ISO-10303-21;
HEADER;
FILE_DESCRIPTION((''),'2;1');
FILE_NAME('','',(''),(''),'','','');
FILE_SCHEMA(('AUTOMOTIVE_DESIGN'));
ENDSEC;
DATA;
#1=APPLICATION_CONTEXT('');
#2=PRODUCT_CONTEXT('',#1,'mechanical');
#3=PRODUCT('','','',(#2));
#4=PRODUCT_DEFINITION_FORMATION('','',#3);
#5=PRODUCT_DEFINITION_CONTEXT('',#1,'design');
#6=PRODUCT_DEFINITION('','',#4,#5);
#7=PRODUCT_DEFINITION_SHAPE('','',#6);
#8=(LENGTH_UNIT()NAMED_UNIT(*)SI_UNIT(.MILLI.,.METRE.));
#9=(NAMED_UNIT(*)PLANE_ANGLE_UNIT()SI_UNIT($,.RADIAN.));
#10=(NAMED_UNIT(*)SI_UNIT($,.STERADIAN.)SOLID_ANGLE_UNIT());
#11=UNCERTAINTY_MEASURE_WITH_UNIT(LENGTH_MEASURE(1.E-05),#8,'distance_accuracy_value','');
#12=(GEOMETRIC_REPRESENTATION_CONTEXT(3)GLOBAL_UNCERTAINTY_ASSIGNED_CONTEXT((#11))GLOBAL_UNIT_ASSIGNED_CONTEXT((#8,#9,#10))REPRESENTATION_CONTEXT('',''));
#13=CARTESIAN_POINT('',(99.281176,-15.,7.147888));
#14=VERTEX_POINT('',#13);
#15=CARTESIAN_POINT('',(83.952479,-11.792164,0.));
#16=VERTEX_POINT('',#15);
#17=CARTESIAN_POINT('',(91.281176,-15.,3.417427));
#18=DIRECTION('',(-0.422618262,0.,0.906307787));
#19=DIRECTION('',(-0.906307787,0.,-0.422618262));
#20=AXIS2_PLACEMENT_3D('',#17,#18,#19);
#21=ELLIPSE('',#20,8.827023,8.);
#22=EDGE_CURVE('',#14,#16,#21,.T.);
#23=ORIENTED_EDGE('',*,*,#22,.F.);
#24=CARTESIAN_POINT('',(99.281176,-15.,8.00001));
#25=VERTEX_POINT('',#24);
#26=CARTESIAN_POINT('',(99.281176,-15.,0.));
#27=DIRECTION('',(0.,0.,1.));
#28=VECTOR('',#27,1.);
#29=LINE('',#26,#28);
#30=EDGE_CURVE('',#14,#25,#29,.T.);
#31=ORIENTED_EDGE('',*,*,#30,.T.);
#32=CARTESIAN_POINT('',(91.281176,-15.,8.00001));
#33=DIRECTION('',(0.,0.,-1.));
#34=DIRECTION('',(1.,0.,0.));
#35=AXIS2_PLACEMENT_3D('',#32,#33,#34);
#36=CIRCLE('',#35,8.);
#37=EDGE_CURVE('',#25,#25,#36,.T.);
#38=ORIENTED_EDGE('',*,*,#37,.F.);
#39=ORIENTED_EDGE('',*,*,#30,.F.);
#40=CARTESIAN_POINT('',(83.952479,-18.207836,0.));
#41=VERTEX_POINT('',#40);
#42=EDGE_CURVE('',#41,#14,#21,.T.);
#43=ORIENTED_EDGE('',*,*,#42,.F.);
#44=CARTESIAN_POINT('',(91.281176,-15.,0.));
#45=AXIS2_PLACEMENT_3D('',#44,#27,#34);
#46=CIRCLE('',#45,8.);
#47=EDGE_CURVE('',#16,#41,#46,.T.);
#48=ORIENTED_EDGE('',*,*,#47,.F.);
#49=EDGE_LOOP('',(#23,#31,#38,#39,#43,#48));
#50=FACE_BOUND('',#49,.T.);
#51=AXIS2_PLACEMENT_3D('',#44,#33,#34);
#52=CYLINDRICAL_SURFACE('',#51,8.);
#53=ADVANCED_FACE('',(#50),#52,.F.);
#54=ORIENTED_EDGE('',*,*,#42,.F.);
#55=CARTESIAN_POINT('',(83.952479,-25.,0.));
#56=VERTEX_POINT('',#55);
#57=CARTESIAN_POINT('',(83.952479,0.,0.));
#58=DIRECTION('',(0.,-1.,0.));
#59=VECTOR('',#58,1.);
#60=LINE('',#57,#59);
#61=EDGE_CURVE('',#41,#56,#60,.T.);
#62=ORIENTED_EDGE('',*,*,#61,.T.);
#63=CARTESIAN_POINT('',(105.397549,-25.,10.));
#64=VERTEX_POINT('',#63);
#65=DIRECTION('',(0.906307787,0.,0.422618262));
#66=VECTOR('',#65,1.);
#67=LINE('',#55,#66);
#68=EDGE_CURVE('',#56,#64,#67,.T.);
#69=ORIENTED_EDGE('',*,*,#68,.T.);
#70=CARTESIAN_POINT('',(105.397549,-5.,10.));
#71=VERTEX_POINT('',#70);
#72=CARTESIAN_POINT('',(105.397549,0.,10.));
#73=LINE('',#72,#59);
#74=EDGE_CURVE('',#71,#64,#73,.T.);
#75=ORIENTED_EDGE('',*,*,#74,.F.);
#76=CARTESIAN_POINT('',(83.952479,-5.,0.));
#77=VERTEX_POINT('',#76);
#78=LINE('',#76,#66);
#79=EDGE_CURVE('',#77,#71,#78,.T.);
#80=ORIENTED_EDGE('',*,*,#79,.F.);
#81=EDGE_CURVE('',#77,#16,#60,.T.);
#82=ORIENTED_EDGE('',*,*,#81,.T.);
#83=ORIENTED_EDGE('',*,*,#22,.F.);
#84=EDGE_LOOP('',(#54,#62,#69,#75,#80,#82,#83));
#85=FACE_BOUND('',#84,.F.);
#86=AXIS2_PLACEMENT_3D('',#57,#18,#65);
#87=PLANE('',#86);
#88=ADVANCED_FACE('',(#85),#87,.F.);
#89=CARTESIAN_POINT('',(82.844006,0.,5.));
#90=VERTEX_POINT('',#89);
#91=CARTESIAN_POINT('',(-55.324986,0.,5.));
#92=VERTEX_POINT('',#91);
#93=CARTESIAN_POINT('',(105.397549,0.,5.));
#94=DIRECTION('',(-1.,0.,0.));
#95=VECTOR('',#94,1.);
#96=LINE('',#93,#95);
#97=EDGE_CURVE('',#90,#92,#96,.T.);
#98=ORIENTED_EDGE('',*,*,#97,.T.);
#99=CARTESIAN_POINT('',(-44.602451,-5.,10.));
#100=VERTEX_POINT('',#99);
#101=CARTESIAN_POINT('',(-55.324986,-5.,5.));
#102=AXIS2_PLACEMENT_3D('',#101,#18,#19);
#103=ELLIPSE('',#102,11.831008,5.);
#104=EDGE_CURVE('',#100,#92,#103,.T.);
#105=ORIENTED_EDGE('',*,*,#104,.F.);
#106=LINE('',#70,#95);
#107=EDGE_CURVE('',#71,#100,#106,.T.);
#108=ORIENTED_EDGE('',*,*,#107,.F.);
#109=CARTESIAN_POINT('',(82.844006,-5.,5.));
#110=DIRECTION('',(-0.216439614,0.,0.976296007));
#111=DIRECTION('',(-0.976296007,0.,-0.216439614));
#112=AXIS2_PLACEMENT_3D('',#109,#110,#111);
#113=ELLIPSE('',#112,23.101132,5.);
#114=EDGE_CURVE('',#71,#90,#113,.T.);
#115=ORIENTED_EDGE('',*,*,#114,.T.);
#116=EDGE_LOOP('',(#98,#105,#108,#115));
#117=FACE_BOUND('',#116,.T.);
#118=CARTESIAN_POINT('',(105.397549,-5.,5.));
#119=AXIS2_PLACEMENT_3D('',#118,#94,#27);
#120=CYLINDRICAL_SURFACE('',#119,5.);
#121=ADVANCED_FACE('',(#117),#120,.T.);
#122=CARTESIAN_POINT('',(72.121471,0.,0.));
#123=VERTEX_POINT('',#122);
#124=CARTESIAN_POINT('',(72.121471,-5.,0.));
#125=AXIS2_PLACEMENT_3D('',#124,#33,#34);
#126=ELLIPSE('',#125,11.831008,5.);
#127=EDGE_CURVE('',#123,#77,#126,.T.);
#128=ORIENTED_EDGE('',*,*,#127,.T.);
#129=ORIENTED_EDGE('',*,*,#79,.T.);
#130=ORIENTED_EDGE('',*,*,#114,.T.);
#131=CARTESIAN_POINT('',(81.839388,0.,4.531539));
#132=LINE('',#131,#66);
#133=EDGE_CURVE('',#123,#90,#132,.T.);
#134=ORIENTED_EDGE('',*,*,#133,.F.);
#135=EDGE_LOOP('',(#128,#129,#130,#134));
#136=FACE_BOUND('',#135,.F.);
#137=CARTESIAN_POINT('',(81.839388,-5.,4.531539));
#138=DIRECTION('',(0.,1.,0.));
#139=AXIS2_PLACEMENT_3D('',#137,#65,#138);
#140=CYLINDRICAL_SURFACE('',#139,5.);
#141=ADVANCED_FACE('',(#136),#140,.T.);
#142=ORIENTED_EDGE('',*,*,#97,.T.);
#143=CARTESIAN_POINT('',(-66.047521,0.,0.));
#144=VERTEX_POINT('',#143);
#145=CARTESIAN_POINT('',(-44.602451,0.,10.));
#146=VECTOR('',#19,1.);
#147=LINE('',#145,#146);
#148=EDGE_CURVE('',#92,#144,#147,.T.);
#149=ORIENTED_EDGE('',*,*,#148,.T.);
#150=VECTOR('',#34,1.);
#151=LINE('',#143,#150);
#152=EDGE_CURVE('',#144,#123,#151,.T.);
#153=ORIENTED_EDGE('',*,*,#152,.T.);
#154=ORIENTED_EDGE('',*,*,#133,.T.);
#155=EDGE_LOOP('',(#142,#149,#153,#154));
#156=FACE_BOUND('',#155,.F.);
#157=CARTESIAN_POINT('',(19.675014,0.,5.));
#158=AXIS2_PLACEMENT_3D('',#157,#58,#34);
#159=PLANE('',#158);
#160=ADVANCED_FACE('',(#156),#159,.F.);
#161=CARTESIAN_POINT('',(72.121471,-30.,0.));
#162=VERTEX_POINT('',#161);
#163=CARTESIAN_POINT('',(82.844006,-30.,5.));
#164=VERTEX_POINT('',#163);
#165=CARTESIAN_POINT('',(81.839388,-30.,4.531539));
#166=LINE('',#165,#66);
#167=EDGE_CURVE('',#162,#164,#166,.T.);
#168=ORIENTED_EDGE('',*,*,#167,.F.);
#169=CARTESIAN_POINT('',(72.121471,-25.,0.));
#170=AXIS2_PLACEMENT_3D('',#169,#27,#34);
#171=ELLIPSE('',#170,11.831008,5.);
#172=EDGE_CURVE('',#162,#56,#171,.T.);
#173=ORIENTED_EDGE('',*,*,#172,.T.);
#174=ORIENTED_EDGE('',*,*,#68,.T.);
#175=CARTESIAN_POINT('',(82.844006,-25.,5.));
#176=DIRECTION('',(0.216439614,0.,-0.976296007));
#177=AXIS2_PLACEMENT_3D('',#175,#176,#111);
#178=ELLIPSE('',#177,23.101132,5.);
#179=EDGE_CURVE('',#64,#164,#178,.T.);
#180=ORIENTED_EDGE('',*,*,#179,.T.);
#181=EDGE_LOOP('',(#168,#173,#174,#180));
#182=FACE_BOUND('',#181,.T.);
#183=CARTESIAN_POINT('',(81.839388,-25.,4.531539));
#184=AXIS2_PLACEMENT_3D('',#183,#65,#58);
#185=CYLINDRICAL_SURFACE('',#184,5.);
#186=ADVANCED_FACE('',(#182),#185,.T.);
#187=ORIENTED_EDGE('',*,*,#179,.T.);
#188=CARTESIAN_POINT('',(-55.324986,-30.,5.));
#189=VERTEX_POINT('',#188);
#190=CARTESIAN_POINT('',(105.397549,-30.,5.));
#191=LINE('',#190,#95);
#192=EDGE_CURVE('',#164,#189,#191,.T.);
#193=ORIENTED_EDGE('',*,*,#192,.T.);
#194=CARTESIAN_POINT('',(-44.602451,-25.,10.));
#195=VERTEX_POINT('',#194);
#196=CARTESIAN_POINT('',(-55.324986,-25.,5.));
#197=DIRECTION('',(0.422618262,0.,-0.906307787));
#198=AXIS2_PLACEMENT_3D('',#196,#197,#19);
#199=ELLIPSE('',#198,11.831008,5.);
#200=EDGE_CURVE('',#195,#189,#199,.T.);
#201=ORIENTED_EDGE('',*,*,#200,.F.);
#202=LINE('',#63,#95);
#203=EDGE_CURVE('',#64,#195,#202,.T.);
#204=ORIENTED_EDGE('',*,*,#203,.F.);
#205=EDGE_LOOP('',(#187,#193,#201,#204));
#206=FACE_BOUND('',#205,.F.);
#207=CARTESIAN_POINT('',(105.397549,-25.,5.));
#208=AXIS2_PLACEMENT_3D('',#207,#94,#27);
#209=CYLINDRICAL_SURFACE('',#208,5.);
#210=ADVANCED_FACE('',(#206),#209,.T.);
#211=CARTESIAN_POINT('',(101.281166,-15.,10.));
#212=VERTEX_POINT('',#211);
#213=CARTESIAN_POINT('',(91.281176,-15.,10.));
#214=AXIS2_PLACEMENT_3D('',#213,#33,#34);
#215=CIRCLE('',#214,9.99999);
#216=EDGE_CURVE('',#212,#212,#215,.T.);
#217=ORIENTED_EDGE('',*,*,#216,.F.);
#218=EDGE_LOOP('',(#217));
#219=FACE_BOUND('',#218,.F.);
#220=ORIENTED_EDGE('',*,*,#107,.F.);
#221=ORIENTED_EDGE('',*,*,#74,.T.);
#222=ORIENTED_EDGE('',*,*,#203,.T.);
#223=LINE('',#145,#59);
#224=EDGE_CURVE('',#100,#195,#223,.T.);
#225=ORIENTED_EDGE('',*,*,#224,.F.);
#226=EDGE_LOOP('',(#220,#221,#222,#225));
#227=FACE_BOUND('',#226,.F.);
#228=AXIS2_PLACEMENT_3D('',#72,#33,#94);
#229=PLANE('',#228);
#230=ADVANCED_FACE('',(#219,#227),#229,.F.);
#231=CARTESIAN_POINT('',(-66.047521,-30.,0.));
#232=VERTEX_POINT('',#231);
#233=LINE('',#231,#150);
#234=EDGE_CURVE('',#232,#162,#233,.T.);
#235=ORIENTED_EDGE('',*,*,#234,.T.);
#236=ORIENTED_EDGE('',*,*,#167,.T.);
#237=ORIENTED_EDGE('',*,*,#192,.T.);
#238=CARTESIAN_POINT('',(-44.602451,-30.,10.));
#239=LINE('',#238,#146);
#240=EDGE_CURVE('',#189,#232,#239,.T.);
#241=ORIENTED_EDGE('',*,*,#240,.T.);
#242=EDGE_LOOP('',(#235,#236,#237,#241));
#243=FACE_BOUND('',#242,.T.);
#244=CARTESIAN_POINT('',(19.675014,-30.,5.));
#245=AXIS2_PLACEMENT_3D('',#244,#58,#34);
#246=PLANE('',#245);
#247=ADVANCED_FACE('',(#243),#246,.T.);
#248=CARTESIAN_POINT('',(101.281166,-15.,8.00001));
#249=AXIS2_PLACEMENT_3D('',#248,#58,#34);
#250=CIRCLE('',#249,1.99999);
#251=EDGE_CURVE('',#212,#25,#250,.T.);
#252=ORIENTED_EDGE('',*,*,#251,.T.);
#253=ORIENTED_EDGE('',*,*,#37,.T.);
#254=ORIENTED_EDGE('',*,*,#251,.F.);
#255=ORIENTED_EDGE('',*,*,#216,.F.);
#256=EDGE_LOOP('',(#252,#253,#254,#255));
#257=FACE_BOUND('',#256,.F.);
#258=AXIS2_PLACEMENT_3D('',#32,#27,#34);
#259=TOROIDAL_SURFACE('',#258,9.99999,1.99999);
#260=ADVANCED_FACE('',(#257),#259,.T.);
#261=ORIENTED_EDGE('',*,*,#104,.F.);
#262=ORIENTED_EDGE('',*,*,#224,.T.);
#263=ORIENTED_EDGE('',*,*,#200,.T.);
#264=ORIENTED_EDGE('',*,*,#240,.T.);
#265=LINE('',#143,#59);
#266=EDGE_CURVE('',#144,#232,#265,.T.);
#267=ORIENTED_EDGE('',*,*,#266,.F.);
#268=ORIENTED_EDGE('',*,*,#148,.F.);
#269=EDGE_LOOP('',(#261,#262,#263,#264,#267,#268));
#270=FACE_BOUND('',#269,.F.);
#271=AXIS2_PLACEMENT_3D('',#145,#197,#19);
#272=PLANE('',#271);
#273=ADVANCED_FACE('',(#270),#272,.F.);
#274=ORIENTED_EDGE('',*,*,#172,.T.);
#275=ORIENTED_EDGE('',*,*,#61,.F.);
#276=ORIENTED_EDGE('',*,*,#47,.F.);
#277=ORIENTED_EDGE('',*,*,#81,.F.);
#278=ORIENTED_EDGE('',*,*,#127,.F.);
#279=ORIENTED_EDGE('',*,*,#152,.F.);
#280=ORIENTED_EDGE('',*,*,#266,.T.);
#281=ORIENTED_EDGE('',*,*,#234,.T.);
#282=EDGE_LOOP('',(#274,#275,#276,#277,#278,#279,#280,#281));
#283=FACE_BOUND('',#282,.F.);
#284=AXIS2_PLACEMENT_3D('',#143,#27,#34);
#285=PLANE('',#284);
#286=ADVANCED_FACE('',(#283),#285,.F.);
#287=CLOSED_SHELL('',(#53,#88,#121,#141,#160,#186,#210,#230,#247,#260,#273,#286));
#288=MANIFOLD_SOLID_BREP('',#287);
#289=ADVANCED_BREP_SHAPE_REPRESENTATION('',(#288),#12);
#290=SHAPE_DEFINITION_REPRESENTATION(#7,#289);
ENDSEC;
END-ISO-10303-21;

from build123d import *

# Parameters (mm, degrees)
F1_DEPTH = 30
F2_R     = 8
F3_DEPTH = 25
F4_R     = 5
F5_R     = 1.99999


# Not quite as in the source:
# - a fillet or chamfer is up to 0.001 mm smaller than in the source, because OpenCascade refuses the exact size


with BuildPart() as f1:
    # F0 (on Front) → F1 (new body)
    with BuildSketch(Plane.XZ):
        Polygon((-44.6024514475, 10), (-66.0475206525, 0), (83.9524793475, 0), (105.3975485525, 10), align=None)
    extrude(amount=F1_DEPTH)

    # F2 (on Top) → F3 (cut)
    with BuildSketch(Plane.XY):
        with Locations((91.2811756134, -15)):
            Circle(F2_R)
    extrude(amount=F3_DEPTH, mode=Mode.SUBTRACT)

    # F4
    f4_edges = [f1.edges().sort_by_distance(p)[0] for p in [
        (30.397549, 0, 10),
        (30.397549, -30, 10),
        (94.675014, -30, 5),
        (94.675014, 0, 5),
    ]]
    fillet(f4_edges, radius=F4_R)

    # F5 (radius 2 in the source; OpenCascade refuses exactly that, so slightly less here)
    f5_edges = [f1.edges().sort_by_distance(p)[0] for p in [
        (83.281176, -15, 10),
    ]]
    fillet(f5_edges, radius=F5_R)


solid = f1.part
